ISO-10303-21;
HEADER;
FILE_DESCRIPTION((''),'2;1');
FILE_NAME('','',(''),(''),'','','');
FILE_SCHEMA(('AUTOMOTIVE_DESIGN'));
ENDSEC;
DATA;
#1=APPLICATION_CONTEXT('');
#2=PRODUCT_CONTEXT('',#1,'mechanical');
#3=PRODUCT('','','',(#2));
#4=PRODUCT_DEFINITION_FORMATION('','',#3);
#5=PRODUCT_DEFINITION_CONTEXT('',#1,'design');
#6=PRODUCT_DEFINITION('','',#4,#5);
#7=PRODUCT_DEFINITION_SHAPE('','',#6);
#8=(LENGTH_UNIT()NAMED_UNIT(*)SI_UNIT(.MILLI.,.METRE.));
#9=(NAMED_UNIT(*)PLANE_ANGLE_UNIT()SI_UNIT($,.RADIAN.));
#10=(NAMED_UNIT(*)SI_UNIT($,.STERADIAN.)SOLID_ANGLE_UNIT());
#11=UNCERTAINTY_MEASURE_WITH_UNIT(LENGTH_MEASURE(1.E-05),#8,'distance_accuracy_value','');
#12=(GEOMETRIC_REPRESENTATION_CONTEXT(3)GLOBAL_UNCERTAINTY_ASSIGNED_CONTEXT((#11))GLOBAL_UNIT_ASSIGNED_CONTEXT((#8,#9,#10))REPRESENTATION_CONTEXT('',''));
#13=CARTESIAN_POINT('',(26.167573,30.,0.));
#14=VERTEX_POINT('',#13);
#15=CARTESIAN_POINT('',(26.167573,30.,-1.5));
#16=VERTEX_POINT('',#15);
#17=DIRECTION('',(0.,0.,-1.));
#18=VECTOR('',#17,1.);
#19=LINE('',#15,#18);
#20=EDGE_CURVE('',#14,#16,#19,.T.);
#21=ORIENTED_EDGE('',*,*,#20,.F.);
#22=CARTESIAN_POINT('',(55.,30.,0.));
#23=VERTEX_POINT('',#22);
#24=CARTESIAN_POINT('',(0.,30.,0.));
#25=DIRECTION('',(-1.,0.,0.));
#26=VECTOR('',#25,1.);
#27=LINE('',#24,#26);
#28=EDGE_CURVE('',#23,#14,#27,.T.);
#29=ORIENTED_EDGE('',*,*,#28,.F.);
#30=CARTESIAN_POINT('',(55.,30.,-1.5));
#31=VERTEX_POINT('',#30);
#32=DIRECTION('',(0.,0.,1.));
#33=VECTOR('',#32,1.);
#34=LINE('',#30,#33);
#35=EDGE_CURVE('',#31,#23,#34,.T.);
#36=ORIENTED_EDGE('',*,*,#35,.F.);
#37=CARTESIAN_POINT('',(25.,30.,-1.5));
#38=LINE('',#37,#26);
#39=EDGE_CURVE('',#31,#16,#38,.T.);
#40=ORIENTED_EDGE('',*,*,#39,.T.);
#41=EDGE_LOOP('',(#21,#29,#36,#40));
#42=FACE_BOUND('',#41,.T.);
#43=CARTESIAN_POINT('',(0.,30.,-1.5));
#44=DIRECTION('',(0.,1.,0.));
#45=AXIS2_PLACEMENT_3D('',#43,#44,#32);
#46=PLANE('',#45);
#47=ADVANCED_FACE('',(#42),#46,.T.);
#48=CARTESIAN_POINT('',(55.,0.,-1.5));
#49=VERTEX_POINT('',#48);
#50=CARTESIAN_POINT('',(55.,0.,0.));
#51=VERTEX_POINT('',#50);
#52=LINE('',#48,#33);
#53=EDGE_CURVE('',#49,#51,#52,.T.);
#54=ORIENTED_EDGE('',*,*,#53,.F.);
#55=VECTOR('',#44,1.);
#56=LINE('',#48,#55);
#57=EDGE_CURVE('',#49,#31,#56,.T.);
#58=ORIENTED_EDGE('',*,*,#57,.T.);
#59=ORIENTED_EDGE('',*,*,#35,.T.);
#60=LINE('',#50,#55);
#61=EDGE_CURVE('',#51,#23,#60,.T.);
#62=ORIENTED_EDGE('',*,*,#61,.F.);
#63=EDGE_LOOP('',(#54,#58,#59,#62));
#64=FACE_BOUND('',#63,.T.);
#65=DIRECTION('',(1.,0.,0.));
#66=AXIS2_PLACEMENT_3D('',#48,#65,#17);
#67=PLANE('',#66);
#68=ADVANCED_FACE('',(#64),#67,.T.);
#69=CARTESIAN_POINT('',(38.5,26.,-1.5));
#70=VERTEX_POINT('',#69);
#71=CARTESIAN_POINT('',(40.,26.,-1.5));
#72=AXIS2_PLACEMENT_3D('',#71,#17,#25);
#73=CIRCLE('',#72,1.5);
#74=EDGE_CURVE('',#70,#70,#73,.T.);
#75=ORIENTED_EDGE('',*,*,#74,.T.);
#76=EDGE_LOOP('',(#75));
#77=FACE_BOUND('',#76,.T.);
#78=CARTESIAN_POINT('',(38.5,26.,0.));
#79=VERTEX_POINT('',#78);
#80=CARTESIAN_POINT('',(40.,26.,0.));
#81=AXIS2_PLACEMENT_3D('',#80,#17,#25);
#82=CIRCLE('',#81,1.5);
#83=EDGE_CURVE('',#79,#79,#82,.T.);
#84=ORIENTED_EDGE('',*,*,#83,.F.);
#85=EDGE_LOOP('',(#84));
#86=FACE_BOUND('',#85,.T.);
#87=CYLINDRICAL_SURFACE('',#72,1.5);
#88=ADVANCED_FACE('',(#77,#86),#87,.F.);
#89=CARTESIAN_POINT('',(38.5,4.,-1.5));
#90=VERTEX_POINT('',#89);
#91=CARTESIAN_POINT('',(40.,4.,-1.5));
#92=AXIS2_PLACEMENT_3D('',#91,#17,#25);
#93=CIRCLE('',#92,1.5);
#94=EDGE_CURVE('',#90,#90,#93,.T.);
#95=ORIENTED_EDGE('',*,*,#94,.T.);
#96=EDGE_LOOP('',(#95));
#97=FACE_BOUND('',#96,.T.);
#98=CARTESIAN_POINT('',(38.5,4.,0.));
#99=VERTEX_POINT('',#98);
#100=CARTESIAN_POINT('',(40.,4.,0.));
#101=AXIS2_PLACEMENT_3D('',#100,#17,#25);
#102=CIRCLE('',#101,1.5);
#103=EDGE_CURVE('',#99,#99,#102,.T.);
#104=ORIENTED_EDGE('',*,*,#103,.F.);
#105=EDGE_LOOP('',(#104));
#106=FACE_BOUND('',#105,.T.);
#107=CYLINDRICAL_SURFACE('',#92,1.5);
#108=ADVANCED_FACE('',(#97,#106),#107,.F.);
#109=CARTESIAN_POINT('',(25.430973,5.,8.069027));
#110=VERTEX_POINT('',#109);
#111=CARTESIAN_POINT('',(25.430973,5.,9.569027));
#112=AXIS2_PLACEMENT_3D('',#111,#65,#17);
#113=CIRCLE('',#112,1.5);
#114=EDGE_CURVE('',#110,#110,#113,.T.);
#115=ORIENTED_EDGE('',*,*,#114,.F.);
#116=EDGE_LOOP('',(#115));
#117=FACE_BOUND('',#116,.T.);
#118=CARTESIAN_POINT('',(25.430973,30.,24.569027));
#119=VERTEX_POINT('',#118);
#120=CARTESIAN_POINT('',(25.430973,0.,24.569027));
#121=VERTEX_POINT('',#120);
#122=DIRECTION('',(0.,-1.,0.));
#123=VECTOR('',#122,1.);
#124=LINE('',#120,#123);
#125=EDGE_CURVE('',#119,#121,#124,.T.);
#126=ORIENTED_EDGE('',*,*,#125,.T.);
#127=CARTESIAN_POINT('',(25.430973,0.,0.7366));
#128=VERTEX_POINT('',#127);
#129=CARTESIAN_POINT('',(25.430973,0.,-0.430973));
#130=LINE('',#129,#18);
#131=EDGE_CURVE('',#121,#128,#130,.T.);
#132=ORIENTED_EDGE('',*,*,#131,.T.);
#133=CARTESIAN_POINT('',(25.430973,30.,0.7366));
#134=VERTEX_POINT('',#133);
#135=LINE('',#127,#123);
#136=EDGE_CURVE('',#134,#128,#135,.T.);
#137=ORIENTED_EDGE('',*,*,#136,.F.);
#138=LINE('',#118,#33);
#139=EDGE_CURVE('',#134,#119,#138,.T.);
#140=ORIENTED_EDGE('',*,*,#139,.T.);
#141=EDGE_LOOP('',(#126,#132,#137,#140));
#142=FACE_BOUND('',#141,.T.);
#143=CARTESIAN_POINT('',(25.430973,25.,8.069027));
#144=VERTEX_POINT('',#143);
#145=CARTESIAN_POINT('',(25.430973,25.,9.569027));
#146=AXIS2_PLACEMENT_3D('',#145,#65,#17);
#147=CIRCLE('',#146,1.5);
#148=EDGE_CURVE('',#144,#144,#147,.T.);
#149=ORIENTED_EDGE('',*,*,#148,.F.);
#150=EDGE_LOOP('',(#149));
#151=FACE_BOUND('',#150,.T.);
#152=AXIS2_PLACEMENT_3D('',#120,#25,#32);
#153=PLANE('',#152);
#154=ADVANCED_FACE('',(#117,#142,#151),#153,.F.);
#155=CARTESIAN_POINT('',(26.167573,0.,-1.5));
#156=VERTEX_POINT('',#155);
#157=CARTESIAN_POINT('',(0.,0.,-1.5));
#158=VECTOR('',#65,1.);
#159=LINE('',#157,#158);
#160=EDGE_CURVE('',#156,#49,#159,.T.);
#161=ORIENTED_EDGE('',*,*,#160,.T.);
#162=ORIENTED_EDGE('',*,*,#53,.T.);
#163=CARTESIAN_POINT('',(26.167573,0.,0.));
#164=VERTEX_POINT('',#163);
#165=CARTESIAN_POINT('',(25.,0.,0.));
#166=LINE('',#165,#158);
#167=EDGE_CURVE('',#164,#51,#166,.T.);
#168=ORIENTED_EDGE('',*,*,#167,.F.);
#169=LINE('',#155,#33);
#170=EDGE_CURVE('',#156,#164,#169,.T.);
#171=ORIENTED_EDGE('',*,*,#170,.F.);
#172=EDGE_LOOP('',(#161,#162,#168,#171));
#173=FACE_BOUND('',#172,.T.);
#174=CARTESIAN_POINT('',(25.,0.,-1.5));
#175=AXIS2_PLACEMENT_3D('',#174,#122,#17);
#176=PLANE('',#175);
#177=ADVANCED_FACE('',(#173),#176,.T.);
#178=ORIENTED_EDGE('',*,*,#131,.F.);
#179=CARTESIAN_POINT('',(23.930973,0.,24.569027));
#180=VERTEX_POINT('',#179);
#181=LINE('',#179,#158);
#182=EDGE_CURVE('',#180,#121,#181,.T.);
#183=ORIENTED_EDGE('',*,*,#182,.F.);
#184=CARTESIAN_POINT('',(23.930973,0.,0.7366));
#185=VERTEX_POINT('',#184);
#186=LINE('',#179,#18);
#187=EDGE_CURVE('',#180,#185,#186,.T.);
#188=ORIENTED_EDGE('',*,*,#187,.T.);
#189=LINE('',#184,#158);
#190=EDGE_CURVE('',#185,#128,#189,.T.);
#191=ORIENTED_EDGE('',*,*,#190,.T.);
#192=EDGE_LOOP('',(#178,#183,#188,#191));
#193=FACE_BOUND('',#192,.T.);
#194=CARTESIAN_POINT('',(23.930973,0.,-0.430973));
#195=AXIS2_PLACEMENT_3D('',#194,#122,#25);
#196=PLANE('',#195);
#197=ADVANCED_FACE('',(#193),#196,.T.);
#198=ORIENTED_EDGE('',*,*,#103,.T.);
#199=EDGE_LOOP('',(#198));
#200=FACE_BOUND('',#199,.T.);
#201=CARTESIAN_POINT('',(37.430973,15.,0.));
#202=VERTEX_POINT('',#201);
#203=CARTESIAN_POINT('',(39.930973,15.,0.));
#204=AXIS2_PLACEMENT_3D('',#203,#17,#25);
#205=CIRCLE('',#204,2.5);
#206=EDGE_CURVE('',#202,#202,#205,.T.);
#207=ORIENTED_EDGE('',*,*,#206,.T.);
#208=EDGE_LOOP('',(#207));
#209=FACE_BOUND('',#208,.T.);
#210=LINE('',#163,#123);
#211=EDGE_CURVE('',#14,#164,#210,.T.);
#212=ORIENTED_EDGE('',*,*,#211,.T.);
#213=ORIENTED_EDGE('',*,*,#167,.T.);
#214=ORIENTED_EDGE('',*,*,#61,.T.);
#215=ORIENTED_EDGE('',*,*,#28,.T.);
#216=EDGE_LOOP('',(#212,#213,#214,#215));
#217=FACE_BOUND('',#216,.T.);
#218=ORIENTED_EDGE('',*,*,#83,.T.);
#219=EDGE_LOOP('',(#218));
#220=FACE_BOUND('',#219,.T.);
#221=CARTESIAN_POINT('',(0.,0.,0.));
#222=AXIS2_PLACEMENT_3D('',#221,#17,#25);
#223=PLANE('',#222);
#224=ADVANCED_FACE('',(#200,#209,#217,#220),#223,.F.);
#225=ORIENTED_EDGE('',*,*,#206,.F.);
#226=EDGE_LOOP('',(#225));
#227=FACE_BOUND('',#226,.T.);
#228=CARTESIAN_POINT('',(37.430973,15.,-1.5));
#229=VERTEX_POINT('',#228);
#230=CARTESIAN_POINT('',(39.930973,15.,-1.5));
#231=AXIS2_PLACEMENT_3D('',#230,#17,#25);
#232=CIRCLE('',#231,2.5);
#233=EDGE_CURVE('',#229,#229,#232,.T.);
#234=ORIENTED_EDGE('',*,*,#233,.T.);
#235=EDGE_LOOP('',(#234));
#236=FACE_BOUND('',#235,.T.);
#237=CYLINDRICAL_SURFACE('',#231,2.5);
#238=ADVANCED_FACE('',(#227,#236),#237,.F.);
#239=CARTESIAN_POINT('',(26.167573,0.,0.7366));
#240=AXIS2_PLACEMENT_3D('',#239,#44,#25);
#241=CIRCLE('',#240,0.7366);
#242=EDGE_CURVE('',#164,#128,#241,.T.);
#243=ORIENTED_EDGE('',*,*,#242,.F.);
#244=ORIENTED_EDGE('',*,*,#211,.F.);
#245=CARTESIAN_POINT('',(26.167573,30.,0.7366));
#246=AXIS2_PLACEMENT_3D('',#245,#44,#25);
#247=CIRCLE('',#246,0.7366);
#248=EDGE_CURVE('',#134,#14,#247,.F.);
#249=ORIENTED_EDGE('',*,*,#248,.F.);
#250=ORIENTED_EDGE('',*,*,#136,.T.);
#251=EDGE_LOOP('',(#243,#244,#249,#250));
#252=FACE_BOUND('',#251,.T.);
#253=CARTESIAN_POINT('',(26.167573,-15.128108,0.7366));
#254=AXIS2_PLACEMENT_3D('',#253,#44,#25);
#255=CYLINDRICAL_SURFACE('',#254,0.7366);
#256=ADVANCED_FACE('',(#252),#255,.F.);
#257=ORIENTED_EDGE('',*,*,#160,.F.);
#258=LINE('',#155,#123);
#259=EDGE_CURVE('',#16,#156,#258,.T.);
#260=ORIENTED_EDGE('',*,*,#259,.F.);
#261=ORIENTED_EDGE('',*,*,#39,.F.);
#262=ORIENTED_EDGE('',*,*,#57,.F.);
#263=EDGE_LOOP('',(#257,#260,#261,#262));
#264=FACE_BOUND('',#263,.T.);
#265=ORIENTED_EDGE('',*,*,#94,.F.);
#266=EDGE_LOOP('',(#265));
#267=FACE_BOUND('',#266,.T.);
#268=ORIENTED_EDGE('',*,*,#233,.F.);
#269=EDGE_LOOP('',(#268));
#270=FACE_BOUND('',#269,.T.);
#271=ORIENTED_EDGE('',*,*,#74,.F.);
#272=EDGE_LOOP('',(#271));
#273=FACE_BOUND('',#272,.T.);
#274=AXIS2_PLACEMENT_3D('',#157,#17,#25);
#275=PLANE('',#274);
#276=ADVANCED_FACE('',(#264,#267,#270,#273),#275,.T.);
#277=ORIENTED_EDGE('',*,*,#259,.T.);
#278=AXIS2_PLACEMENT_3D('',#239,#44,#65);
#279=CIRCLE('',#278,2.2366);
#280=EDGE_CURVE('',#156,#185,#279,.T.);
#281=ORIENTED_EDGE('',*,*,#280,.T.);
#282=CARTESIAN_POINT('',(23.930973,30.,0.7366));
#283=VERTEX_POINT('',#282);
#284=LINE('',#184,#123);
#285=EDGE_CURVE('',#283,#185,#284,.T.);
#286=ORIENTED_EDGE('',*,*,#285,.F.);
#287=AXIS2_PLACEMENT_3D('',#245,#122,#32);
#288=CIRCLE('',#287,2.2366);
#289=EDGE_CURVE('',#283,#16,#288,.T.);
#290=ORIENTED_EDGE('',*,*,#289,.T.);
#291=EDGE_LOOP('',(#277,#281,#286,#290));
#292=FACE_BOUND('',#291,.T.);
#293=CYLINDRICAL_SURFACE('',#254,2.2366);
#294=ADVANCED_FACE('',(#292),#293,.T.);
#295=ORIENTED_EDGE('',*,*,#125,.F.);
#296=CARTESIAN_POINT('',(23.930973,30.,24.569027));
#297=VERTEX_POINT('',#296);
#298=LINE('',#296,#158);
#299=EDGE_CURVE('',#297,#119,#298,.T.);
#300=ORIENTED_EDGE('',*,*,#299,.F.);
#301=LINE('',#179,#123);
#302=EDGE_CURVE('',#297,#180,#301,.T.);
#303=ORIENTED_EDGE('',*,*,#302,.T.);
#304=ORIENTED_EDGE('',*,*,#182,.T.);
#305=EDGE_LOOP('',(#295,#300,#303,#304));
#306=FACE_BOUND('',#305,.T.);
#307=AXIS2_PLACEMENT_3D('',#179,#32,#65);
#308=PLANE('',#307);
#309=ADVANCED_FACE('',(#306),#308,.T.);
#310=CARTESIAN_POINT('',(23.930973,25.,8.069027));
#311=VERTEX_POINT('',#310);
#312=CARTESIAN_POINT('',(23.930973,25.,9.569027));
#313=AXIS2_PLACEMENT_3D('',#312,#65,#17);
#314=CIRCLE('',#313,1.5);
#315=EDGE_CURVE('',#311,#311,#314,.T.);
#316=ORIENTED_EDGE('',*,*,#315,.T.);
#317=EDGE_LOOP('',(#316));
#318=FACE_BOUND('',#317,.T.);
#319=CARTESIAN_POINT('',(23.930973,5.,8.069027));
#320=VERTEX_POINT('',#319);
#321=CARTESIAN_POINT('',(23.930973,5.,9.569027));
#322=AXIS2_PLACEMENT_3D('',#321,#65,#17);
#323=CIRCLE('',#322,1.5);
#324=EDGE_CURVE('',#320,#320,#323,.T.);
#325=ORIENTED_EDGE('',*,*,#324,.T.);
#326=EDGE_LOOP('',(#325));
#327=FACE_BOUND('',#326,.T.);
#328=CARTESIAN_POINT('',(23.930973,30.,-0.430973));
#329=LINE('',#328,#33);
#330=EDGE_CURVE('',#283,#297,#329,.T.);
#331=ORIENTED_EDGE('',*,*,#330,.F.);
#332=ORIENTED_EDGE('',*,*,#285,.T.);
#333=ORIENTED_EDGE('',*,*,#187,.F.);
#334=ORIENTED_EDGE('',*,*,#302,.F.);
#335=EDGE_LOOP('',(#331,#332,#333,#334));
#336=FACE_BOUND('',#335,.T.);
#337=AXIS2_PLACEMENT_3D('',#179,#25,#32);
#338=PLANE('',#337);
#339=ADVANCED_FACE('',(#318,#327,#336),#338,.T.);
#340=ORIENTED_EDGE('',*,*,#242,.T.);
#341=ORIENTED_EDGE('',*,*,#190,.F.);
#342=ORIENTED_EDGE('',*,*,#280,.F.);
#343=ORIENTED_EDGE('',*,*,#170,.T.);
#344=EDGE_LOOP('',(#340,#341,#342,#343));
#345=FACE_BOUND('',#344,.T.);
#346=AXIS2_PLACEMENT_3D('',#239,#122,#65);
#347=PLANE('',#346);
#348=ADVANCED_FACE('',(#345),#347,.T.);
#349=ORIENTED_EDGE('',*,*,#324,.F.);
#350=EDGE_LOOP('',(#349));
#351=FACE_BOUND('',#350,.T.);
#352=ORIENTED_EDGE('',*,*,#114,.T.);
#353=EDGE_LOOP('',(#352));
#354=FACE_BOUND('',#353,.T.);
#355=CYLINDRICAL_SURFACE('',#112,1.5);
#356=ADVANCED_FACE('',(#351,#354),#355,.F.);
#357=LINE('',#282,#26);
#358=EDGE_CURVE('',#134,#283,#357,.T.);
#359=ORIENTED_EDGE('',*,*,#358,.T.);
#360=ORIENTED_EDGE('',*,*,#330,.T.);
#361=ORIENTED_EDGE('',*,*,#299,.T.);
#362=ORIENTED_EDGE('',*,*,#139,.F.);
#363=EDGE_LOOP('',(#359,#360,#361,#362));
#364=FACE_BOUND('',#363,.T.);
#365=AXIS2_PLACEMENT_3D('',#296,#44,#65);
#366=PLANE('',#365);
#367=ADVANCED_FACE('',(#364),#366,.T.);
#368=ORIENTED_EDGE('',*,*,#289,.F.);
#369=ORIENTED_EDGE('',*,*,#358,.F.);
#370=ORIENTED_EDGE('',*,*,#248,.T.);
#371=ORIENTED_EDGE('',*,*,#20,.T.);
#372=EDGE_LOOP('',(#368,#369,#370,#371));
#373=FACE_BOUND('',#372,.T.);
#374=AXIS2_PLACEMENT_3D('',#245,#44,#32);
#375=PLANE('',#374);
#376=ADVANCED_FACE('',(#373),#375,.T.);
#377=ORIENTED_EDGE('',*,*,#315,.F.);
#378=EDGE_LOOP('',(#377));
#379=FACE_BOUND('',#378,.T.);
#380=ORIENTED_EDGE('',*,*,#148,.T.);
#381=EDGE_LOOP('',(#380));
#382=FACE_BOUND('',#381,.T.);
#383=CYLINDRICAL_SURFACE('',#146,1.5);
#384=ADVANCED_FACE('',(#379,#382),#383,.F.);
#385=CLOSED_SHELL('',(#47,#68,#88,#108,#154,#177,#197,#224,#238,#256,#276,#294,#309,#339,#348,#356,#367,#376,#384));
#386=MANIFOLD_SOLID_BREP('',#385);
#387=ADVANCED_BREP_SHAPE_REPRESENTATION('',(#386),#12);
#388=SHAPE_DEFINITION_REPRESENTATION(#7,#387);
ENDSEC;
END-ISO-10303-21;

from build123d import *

# Parameters (mm, degrees)
BASE_FLANGE1_DEPTH              = 1.5
SKETCHED_BEND1_DEPTH            = 30
SKETCHED_BEND1_2_DEPTH          = 30
F_5_0MM_PRESS_DOWEL_HOLE1_D     = 5
F_3_0MM_PRESS_DOWEL_HOLE1_D     = 3
F_3_0MM_PRESS_DOWEL_HOLE2_D     = 3
F_3_0MM_PRESS_DOWEL_HOLE3_D     = 3
F_3_0MM_PRESS_DOWEL_HOLE3_DEPTH = 6
F_3_0MM_PRESS_DOWEL_HOLE3_TIP   = 0.901290929


# Read off the part's stored shape, not the designer's step: Sketched Bend1
# Sheet-metal steps are written as plain solids
with BuildPart() as part:
    # Sketch1 → Base-Flange1 (new body)
    with BuildSketch(Plane.XY):
        Polygon((0, 0), (25, 0), (55, 0), (55, 30), (25, 30), (0, 30), align=None)
    extrude(amount=-BASE_FLANGE1_DEPTH)

    # Sketched Bend1 outline → Sketched Bend1 (cut)
    with BuildSketch(Plane(origin=(0, 0, 0), x_dir=(1, 0, 0), z_dir=(0, 1, 0))):
        with BuildLine():
            Line((0, 0), (24.055749054, 0))
            ThreePointArc((24.055749054, 0), (24.872408828, 1.086838938), (26.16757291, 1.5))
            Line((26.16757291, 1.5), (0, 1.5))
            Line((0, 1.5), (0, 0))
        make_face()
    extrude(amount=SKETCHED_BEND1_DEPTH, mode=Mode.SUBTRACT)

    # Sketched Bend1 2 outline → Sketched Bend1 2 (add)
    with BuildSketch(Plane(origin=(0, 0, 0), x_dir=(1, 0, 0), z_dir=(0, 1, 0))):
        with BuildLine():
            ThreePointArc((24.055749054, 0), (23.962387567, -0.363053267), (23.93097291, -0.7366))
            Line((23.93097291, -0.7366), (23.93097291, -24.56902709))
            Line((23.93097291, -24.56902709), (25.43097291, -24.56902709))
            Line((25.43097291, -24.56902709), (25.43097291, -0.7366))
            ThreePointArc((25.43097291, -0.7366), (25.646718055, -0.215745145), (26.16757291, 0))
            Line((26.16757291, 0), (24.055749054, 0))
        make_face()
    extrude(amount=SKETCHED_BEND1_2_DEPTH)

    # Ø5.0mm Press Dowel Hole1 (through all)
    with Locations(Plane(origin=(0, 0, -1.5), x_dir=(-1, 0, 0), z_dir=(0, 0, -1))):
        with Locations((-39.93097291, 15)):
            Hole(F_5_0MM_PRESS_DOWEL_HOLE1_D / 2)

    # Ø3.0mm Press Dowel Hole1 (through all)
    with Locations(Plane(origin=(0, 0, -1.5), x_dir=(-1, 0, 0), z_dir=(0, 0, -1))):
        with Locations((-40, 4), (-40, 26)):
            Hole(F_3_0MM_PRESS_DOWEL_HOLE1_D / 2)

    # Ø3.0mm Press Dowel Hole2 (through all)
    with Locations(Plane(origin=(25.43097291, 0, 0), x_dir=(0, 0, -1), z_dir=(1, 0, 0))):
        with Locations((-9.56902709, 5), (-9.56902709, 25)):
            Hole(F_3_0MM_PRESS_DOWEL_HOLE2_D / 2)

    # Ø3.0mm Press Dowel Hole3
    with Locations(Plane(origin=(23.93097291, -205.525513363, -308.224624397), x_dir=(0, 1, 0), z_dir=(1, 0, 0))):
        with Locations((220.525513363, 156.531359221), (102.525513363, 181.531359221), (102.525513363, 271.531359221), (89.19270005, 226.531359221), (210.525513363, 317.793651488), (230.525513363, 317.793651488), (252.525513363, 320.462332131), (232.525513363, 300.462332131), (252.525513363, 132.600386311), (232.525513363, 152.600386311), (111.286271896, 136.531359221), (91.286271896, 136.531359221), (41.525513363, 196.432813402), (13.525513363, 196.432813402), (41.525513363, 138.767959221), (13.525513363, 138.767959221), (41.525513363, 256.62990504), (13.525513363, 256.62990504), (41.525513363, 314.294759221), (13.525513363, 314.294759221)):
            Hole(F_3_0MM_PRESS_DOWEL_HOLE3_D / 2, depth=F_3_0MM_PRESS_DOWEL_HOLE3_DEPTH)
            with Locations((0, 0, -(F_3_0MM_PRESS_DOWEL_HOLE3_DEPTH + F_3_0MM_PRESS_DOWEL_HOLE3_TIP / 2))):  # 118° drill point
                Cone(0, F_3_0MM_PRESS_DOWEL_HOLE3_D / 2, F_3_0MM_PRESS_DOWEL_HOLE3_TIP, mode=Mode.SUBTRACT)


solid = part.part
